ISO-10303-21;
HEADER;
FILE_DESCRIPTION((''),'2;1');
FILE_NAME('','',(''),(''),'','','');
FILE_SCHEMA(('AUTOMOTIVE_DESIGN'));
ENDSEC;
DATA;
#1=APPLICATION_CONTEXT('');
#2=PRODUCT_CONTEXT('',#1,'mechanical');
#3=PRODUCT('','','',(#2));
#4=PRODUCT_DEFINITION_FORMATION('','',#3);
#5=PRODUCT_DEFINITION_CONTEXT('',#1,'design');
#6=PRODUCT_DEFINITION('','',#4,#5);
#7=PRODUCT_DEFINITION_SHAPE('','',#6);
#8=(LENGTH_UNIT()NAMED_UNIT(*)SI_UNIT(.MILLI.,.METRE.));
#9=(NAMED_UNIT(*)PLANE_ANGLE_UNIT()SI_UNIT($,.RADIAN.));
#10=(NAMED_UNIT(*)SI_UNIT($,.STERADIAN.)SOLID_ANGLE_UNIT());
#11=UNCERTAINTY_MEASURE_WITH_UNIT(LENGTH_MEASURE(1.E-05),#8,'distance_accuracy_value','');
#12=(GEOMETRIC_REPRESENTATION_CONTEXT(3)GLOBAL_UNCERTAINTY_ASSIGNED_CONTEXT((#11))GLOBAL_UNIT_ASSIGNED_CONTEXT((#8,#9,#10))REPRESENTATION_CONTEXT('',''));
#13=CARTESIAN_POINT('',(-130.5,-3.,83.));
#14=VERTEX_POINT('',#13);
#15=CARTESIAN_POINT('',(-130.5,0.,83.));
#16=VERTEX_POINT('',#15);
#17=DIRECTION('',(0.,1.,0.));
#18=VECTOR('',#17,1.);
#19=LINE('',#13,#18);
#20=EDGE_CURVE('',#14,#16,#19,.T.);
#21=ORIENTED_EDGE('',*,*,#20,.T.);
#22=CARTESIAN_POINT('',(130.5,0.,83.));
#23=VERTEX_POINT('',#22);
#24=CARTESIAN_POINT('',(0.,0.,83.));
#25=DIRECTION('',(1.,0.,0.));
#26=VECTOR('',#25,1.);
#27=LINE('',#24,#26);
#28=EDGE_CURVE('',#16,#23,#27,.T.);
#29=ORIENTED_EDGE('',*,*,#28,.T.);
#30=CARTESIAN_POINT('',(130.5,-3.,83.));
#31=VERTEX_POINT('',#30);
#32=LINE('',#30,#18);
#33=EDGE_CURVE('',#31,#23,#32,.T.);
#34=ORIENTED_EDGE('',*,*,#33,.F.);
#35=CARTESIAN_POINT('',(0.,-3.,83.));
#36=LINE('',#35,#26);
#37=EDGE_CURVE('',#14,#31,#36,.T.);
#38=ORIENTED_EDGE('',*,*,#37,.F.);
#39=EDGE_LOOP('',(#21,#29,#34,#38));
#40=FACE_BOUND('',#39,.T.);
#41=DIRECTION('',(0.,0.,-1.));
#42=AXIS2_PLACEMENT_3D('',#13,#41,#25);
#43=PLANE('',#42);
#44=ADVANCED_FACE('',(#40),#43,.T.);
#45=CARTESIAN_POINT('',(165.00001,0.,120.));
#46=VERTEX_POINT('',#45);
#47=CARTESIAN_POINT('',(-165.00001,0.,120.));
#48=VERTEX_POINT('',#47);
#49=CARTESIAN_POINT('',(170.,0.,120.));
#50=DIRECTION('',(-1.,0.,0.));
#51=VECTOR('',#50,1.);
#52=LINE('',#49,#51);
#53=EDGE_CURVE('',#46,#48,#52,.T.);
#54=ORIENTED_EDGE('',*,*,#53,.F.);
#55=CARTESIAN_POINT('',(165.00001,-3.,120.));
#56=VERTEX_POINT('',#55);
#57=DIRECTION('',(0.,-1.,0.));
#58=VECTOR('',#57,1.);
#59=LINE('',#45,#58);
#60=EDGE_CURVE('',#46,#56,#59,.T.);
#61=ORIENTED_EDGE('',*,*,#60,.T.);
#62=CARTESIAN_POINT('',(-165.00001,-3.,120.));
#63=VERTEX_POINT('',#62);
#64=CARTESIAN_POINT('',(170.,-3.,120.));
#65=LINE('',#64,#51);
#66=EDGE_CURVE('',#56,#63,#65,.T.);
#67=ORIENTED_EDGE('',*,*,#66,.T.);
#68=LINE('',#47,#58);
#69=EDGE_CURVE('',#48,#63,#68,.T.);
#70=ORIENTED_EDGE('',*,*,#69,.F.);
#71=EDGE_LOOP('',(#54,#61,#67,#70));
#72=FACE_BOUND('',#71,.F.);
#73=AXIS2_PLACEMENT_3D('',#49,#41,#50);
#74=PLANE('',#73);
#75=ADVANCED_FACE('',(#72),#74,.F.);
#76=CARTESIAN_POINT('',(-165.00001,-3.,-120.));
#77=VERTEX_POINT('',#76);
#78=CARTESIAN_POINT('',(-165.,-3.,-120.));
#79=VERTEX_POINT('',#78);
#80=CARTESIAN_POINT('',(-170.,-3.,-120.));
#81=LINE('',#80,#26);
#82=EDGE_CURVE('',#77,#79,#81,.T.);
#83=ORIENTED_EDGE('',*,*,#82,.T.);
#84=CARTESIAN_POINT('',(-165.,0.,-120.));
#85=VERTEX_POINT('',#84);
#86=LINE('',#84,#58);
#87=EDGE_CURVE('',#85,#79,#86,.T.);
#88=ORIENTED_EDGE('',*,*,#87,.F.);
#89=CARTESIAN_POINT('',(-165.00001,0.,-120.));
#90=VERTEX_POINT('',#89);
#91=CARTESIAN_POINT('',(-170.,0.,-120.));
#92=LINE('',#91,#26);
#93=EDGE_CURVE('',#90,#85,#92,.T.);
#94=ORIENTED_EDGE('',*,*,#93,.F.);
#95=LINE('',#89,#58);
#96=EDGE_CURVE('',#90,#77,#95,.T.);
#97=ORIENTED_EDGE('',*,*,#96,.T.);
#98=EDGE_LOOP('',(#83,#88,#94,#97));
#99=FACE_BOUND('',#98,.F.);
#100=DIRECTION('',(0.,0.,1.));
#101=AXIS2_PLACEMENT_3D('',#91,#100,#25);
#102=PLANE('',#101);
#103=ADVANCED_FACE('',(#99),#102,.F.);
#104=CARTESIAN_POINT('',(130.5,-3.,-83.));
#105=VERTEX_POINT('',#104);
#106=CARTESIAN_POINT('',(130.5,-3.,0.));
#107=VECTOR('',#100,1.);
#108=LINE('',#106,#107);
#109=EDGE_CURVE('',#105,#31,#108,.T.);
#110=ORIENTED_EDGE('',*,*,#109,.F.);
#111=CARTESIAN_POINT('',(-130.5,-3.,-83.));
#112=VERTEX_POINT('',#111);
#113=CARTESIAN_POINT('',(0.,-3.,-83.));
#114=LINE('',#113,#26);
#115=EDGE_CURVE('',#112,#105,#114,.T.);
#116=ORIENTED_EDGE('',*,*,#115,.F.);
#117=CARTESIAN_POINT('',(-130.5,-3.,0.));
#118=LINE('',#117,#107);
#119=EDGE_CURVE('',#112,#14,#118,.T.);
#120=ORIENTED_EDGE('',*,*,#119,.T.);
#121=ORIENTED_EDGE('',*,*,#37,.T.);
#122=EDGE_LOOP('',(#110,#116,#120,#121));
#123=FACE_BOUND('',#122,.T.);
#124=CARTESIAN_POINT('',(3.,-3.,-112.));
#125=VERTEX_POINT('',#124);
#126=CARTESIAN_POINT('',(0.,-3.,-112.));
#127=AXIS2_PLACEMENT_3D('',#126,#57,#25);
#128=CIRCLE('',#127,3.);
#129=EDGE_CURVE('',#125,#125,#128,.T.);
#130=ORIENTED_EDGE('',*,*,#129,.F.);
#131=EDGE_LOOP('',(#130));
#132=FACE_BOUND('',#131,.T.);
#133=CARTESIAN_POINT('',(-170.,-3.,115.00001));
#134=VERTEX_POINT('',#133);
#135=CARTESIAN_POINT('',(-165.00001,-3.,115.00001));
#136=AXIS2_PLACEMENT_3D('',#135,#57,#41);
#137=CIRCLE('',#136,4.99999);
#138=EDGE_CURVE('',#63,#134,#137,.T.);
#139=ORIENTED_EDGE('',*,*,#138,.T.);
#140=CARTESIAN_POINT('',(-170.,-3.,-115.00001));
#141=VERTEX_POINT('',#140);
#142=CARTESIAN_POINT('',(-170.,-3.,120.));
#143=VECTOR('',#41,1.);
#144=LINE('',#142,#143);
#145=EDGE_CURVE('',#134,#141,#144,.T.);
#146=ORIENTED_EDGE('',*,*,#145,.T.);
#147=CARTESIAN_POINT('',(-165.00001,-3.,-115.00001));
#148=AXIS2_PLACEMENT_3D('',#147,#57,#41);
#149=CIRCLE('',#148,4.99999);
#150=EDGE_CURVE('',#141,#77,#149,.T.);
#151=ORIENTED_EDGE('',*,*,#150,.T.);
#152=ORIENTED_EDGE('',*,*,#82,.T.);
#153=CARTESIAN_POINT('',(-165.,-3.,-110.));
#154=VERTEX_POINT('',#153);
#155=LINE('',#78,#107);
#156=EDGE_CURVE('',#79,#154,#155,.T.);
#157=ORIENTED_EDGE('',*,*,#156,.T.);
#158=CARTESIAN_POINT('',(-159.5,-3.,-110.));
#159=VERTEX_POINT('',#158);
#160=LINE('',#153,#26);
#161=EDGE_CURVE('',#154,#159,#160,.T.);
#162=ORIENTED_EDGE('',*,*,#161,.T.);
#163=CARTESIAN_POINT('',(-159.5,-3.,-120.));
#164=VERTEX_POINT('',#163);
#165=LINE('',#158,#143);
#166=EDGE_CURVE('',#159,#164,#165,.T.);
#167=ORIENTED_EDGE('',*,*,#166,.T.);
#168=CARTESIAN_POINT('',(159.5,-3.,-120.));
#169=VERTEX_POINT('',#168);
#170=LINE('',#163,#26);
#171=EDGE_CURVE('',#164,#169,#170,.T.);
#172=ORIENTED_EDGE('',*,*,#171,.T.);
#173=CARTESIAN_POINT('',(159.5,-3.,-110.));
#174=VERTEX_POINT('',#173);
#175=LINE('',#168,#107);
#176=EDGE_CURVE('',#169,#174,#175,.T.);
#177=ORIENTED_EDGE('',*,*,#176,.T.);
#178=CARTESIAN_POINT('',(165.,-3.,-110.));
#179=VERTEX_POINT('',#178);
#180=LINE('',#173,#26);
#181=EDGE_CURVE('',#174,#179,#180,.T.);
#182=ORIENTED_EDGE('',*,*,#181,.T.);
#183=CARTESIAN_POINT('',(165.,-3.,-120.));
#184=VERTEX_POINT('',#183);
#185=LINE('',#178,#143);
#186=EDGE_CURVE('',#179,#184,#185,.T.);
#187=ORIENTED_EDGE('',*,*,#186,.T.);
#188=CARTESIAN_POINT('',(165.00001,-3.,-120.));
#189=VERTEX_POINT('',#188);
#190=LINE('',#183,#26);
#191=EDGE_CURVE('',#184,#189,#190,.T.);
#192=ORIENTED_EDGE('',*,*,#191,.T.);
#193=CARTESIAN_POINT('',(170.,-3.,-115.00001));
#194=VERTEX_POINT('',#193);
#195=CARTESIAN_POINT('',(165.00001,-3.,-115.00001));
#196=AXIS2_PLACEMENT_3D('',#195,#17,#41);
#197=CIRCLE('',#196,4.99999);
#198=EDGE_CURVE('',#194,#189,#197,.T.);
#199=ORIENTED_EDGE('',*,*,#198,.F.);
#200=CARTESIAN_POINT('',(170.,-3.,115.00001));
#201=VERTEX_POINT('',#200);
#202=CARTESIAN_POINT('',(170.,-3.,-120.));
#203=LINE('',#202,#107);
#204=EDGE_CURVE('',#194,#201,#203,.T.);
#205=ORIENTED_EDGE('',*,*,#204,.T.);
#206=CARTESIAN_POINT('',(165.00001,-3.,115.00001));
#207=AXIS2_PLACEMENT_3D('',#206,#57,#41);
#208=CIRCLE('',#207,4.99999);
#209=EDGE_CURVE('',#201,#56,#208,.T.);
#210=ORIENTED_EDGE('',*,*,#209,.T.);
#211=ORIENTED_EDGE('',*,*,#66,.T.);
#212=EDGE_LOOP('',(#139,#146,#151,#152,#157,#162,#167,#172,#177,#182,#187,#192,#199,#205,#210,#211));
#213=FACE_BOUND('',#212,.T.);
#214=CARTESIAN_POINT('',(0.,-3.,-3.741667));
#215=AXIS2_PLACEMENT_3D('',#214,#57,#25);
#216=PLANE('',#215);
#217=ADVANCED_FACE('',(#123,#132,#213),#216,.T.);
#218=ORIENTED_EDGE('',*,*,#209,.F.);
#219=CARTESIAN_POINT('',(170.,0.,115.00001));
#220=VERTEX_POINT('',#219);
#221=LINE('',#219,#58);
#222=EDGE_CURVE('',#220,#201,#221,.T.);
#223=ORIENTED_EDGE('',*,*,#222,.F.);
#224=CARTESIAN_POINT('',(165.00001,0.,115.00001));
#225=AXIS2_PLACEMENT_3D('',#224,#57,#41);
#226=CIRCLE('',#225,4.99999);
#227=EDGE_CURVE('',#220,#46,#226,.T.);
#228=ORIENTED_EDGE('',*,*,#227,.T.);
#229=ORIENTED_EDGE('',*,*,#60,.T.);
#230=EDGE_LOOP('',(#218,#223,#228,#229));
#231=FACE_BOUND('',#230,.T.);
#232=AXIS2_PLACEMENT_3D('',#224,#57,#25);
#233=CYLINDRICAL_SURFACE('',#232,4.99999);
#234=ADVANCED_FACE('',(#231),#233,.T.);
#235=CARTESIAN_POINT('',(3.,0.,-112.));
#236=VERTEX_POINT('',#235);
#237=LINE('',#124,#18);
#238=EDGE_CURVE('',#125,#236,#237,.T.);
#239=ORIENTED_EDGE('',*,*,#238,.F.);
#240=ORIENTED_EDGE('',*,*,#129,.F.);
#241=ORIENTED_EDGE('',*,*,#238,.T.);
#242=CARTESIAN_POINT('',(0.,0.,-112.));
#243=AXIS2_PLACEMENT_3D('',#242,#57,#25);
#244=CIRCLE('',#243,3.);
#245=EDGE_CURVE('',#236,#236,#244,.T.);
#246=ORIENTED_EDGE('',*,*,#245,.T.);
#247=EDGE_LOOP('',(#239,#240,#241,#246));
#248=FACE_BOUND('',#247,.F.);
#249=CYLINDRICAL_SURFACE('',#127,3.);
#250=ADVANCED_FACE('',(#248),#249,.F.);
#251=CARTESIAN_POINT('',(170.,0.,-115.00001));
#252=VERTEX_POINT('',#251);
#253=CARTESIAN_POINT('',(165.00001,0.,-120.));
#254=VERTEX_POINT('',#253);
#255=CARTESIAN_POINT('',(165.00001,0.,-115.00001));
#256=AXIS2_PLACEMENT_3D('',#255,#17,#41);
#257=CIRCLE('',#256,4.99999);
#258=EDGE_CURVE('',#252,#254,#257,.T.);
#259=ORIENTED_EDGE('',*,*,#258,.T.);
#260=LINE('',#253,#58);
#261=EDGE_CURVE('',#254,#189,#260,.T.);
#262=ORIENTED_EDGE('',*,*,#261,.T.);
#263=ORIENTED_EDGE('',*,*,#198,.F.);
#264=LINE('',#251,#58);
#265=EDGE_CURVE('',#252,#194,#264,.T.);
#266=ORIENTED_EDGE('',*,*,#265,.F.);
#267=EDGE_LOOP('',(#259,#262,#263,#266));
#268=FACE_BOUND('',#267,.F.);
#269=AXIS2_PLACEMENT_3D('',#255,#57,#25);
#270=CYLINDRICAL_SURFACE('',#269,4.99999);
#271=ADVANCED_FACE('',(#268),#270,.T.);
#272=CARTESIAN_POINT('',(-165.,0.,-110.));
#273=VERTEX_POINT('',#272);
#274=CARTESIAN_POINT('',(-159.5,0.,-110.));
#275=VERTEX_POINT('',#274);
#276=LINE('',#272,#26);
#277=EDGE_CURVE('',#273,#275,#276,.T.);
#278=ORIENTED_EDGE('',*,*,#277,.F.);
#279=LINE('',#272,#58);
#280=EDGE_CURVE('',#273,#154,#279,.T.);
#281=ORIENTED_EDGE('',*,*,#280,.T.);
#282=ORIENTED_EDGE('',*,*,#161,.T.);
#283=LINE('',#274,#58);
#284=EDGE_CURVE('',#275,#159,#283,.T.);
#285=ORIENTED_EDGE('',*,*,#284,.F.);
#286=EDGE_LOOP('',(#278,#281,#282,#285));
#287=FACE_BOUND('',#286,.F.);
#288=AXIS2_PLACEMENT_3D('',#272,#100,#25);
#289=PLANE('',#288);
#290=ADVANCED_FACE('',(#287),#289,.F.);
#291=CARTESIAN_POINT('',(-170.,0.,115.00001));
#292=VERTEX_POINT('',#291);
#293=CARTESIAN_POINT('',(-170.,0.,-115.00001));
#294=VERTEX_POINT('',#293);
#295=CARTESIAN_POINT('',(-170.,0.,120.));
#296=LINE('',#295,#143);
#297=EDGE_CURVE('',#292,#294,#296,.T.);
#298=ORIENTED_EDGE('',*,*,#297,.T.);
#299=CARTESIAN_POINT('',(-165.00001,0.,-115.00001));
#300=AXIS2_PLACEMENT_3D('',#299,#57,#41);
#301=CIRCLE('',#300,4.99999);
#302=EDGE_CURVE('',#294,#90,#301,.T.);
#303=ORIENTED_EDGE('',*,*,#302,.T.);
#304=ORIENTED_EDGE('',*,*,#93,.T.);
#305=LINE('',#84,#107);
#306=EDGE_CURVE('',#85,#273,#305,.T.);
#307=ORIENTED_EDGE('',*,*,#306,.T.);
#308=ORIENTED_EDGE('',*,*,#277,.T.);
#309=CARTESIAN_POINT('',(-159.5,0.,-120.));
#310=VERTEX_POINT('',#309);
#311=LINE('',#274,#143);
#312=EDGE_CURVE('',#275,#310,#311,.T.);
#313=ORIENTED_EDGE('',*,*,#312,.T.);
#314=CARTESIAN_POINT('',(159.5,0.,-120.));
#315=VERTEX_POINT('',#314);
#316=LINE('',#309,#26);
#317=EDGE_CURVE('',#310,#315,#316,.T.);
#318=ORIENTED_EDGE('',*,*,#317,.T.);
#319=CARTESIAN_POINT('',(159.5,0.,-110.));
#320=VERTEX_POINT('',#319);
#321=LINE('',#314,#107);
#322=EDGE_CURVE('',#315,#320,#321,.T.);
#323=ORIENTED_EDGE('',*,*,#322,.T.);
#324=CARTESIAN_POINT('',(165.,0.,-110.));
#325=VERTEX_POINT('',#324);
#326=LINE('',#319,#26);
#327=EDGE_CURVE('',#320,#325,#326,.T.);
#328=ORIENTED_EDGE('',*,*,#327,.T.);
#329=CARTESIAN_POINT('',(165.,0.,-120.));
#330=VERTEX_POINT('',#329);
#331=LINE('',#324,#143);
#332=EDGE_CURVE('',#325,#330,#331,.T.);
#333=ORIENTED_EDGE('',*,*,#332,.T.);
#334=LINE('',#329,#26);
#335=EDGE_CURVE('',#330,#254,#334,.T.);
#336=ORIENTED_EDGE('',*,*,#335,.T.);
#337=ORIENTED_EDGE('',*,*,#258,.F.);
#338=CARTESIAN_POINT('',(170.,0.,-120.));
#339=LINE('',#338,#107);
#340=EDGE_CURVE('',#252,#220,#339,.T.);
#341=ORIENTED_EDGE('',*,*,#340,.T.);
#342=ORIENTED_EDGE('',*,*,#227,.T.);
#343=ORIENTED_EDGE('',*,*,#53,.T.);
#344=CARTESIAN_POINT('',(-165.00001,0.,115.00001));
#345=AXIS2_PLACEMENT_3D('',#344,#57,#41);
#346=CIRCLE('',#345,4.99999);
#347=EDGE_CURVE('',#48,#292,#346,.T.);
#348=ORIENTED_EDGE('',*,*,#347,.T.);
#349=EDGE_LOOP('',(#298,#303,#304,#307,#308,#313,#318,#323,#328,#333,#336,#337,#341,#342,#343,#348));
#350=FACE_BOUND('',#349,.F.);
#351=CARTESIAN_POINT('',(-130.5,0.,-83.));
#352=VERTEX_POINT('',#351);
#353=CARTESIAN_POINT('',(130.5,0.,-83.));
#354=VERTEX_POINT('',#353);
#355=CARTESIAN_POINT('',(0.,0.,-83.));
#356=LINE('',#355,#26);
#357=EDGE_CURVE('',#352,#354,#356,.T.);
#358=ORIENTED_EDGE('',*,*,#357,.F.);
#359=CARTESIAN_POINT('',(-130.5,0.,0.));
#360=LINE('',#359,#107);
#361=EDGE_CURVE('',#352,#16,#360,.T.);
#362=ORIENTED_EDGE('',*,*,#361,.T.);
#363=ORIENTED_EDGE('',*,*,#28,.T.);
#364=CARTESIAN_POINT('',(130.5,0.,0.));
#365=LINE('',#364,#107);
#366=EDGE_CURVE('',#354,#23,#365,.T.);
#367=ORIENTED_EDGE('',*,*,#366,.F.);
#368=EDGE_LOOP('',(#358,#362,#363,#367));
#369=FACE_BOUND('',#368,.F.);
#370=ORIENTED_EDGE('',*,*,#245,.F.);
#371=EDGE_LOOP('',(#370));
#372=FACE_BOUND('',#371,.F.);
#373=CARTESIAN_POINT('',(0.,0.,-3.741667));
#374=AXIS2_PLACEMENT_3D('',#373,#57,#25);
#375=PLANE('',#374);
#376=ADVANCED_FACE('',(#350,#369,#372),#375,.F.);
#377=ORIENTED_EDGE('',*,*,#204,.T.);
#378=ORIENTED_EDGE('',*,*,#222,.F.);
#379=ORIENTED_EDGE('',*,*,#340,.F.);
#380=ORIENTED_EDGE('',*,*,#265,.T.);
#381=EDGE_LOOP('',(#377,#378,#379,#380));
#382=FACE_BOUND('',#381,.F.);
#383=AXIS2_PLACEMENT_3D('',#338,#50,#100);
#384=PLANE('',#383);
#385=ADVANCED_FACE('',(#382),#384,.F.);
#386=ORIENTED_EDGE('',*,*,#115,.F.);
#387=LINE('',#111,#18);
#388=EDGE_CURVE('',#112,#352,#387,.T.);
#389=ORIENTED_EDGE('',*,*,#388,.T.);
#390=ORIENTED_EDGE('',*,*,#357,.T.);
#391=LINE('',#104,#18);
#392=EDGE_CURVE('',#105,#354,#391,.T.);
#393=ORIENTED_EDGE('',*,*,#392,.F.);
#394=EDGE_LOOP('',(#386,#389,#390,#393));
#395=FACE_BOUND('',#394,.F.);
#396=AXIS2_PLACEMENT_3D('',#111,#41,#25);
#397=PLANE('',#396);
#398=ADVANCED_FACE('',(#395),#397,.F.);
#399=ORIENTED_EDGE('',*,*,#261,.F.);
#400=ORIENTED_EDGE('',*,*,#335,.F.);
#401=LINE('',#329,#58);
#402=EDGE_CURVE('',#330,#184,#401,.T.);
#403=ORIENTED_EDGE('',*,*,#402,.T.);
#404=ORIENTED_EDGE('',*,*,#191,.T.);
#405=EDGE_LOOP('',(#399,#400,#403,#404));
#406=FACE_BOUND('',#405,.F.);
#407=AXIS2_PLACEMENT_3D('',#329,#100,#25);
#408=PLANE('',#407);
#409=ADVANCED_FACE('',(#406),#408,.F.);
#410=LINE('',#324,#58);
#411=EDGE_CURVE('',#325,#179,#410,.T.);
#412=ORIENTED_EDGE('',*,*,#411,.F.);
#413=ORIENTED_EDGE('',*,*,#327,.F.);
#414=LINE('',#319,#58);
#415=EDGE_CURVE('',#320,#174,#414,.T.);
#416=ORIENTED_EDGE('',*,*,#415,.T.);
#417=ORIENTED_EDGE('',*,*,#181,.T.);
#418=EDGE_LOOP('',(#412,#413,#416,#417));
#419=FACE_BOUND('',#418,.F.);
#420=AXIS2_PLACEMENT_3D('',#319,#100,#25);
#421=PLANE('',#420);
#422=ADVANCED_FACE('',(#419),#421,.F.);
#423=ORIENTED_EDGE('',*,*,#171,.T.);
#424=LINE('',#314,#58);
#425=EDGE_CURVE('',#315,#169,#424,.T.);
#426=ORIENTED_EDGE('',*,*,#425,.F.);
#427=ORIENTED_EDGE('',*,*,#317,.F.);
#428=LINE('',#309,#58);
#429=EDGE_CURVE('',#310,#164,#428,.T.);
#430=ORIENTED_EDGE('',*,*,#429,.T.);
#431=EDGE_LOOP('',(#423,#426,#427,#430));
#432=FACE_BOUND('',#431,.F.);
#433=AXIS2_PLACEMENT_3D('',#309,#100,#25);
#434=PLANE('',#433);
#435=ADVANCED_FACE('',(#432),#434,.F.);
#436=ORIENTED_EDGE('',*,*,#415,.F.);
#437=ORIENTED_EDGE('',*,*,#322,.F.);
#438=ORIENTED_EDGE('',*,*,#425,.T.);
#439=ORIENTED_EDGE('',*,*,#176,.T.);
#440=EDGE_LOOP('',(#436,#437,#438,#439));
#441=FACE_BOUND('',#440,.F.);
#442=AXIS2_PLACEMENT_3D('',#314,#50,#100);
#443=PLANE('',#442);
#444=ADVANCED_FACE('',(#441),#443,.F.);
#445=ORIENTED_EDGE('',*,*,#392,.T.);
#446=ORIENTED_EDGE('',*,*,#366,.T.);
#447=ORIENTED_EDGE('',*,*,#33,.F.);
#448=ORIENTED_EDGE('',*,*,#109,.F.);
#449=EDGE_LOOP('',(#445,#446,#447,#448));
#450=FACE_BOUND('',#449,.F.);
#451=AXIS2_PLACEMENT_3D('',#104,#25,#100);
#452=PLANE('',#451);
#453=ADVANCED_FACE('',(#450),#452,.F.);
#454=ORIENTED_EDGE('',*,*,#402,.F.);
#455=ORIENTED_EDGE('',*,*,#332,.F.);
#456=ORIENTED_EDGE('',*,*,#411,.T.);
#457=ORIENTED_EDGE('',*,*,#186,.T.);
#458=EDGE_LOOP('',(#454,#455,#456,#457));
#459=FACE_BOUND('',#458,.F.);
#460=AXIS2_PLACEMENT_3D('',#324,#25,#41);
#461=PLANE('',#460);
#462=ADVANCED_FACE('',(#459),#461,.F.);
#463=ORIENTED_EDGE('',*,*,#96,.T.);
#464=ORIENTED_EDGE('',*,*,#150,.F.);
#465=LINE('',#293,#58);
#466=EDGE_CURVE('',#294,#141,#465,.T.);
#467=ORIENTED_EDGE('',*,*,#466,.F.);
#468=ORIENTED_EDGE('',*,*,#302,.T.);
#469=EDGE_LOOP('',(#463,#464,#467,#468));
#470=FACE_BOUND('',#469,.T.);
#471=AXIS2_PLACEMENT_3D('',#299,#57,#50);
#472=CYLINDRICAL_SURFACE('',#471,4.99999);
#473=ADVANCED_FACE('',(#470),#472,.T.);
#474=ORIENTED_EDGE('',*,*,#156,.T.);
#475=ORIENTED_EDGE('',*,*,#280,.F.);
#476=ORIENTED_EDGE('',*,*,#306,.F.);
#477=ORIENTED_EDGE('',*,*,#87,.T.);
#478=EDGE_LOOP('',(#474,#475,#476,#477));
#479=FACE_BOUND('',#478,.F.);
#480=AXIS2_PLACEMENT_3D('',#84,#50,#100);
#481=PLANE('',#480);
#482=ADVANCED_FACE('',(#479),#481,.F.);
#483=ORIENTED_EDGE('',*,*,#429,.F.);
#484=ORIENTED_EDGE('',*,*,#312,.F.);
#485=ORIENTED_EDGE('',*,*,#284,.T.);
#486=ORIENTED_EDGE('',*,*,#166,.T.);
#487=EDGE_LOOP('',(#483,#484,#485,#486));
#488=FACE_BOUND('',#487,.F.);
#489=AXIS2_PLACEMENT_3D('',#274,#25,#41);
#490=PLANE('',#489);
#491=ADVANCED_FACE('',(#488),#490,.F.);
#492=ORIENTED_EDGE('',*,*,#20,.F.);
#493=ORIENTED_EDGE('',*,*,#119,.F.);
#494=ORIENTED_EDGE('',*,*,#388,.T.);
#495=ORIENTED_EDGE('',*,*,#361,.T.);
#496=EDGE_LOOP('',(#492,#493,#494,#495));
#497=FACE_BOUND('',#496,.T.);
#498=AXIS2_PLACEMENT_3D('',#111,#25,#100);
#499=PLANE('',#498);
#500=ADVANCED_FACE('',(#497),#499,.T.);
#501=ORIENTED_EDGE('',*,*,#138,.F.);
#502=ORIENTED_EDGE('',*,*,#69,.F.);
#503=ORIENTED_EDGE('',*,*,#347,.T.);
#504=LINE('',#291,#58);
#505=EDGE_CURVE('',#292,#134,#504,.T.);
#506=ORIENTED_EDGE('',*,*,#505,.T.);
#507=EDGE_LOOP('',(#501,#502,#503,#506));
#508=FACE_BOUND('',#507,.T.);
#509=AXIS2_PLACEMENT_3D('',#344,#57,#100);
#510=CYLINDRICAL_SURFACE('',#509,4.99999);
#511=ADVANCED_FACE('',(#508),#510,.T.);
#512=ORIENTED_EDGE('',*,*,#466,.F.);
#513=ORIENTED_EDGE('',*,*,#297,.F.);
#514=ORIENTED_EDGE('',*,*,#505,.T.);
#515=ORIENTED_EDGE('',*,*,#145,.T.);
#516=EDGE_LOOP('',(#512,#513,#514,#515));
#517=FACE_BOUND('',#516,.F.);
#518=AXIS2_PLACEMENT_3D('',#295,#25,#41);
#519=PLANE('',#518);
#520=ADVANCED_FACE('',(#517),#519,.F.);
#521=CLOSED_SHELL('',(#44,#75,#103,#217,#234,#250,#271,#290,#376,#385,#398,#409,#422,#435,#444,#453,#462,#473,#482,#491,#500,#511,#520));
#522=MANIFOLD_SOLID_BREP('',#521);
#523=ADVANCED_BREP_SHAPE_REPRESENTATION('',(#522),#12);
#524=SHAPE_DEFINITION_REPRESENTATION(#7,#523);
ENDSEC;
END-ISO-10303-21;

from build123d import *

# Parameters (mm, degrees)
F1_DEPTH = 3
F2_W     = 261
F2_H     = 166
F2_R     = 3
F3_DEPTH = 3
F4_R     = 4.99999


# Not quite as in the source:
# - a fillet or chamfer is up to 0.001 mm smaller than in the source, because OpenCascade refuses the exact size


with BuildPart() as f1:
    # F0 (on Front) → F1 (new body)
    with BuildSketch(Plane.XZ):
        Polygon((170, -120), (170, 120), (-170, 120), (-170, -120), (-165, -120), (-165, -110), (-159.5, -110), (-159.5, -120), (159.5, -120), (159.5, -110), (165, -110), (165, -120), align=None)
    extrude(amount=F1_DEPTH)

    # F2 (on face) → F3 (cut, through all)
    with BuildSketch(Plane.XZ.offset(3)):
        Rectangle(F2_W, F2_H)
        with Locations((0, -112)):
            Circle(F2_R)
    extrude(amount=-F3_DEPTH, mode=Mode.SUBTRACT)

    # F4 (radius 5 in the source; OpenCascade refuses exactly that, so slightly less here)
    f4_edges = [f1.edges().sort_by_distance(p)[0] for p in [
        (-170, -1.5, 120),
        (170, -1.5, 120),
        (170, -1.5, -120),
        (-170, -1.5, -120),
    ]]
    fillet(f4_edges, radius=F4_R)


solid = f1.part
